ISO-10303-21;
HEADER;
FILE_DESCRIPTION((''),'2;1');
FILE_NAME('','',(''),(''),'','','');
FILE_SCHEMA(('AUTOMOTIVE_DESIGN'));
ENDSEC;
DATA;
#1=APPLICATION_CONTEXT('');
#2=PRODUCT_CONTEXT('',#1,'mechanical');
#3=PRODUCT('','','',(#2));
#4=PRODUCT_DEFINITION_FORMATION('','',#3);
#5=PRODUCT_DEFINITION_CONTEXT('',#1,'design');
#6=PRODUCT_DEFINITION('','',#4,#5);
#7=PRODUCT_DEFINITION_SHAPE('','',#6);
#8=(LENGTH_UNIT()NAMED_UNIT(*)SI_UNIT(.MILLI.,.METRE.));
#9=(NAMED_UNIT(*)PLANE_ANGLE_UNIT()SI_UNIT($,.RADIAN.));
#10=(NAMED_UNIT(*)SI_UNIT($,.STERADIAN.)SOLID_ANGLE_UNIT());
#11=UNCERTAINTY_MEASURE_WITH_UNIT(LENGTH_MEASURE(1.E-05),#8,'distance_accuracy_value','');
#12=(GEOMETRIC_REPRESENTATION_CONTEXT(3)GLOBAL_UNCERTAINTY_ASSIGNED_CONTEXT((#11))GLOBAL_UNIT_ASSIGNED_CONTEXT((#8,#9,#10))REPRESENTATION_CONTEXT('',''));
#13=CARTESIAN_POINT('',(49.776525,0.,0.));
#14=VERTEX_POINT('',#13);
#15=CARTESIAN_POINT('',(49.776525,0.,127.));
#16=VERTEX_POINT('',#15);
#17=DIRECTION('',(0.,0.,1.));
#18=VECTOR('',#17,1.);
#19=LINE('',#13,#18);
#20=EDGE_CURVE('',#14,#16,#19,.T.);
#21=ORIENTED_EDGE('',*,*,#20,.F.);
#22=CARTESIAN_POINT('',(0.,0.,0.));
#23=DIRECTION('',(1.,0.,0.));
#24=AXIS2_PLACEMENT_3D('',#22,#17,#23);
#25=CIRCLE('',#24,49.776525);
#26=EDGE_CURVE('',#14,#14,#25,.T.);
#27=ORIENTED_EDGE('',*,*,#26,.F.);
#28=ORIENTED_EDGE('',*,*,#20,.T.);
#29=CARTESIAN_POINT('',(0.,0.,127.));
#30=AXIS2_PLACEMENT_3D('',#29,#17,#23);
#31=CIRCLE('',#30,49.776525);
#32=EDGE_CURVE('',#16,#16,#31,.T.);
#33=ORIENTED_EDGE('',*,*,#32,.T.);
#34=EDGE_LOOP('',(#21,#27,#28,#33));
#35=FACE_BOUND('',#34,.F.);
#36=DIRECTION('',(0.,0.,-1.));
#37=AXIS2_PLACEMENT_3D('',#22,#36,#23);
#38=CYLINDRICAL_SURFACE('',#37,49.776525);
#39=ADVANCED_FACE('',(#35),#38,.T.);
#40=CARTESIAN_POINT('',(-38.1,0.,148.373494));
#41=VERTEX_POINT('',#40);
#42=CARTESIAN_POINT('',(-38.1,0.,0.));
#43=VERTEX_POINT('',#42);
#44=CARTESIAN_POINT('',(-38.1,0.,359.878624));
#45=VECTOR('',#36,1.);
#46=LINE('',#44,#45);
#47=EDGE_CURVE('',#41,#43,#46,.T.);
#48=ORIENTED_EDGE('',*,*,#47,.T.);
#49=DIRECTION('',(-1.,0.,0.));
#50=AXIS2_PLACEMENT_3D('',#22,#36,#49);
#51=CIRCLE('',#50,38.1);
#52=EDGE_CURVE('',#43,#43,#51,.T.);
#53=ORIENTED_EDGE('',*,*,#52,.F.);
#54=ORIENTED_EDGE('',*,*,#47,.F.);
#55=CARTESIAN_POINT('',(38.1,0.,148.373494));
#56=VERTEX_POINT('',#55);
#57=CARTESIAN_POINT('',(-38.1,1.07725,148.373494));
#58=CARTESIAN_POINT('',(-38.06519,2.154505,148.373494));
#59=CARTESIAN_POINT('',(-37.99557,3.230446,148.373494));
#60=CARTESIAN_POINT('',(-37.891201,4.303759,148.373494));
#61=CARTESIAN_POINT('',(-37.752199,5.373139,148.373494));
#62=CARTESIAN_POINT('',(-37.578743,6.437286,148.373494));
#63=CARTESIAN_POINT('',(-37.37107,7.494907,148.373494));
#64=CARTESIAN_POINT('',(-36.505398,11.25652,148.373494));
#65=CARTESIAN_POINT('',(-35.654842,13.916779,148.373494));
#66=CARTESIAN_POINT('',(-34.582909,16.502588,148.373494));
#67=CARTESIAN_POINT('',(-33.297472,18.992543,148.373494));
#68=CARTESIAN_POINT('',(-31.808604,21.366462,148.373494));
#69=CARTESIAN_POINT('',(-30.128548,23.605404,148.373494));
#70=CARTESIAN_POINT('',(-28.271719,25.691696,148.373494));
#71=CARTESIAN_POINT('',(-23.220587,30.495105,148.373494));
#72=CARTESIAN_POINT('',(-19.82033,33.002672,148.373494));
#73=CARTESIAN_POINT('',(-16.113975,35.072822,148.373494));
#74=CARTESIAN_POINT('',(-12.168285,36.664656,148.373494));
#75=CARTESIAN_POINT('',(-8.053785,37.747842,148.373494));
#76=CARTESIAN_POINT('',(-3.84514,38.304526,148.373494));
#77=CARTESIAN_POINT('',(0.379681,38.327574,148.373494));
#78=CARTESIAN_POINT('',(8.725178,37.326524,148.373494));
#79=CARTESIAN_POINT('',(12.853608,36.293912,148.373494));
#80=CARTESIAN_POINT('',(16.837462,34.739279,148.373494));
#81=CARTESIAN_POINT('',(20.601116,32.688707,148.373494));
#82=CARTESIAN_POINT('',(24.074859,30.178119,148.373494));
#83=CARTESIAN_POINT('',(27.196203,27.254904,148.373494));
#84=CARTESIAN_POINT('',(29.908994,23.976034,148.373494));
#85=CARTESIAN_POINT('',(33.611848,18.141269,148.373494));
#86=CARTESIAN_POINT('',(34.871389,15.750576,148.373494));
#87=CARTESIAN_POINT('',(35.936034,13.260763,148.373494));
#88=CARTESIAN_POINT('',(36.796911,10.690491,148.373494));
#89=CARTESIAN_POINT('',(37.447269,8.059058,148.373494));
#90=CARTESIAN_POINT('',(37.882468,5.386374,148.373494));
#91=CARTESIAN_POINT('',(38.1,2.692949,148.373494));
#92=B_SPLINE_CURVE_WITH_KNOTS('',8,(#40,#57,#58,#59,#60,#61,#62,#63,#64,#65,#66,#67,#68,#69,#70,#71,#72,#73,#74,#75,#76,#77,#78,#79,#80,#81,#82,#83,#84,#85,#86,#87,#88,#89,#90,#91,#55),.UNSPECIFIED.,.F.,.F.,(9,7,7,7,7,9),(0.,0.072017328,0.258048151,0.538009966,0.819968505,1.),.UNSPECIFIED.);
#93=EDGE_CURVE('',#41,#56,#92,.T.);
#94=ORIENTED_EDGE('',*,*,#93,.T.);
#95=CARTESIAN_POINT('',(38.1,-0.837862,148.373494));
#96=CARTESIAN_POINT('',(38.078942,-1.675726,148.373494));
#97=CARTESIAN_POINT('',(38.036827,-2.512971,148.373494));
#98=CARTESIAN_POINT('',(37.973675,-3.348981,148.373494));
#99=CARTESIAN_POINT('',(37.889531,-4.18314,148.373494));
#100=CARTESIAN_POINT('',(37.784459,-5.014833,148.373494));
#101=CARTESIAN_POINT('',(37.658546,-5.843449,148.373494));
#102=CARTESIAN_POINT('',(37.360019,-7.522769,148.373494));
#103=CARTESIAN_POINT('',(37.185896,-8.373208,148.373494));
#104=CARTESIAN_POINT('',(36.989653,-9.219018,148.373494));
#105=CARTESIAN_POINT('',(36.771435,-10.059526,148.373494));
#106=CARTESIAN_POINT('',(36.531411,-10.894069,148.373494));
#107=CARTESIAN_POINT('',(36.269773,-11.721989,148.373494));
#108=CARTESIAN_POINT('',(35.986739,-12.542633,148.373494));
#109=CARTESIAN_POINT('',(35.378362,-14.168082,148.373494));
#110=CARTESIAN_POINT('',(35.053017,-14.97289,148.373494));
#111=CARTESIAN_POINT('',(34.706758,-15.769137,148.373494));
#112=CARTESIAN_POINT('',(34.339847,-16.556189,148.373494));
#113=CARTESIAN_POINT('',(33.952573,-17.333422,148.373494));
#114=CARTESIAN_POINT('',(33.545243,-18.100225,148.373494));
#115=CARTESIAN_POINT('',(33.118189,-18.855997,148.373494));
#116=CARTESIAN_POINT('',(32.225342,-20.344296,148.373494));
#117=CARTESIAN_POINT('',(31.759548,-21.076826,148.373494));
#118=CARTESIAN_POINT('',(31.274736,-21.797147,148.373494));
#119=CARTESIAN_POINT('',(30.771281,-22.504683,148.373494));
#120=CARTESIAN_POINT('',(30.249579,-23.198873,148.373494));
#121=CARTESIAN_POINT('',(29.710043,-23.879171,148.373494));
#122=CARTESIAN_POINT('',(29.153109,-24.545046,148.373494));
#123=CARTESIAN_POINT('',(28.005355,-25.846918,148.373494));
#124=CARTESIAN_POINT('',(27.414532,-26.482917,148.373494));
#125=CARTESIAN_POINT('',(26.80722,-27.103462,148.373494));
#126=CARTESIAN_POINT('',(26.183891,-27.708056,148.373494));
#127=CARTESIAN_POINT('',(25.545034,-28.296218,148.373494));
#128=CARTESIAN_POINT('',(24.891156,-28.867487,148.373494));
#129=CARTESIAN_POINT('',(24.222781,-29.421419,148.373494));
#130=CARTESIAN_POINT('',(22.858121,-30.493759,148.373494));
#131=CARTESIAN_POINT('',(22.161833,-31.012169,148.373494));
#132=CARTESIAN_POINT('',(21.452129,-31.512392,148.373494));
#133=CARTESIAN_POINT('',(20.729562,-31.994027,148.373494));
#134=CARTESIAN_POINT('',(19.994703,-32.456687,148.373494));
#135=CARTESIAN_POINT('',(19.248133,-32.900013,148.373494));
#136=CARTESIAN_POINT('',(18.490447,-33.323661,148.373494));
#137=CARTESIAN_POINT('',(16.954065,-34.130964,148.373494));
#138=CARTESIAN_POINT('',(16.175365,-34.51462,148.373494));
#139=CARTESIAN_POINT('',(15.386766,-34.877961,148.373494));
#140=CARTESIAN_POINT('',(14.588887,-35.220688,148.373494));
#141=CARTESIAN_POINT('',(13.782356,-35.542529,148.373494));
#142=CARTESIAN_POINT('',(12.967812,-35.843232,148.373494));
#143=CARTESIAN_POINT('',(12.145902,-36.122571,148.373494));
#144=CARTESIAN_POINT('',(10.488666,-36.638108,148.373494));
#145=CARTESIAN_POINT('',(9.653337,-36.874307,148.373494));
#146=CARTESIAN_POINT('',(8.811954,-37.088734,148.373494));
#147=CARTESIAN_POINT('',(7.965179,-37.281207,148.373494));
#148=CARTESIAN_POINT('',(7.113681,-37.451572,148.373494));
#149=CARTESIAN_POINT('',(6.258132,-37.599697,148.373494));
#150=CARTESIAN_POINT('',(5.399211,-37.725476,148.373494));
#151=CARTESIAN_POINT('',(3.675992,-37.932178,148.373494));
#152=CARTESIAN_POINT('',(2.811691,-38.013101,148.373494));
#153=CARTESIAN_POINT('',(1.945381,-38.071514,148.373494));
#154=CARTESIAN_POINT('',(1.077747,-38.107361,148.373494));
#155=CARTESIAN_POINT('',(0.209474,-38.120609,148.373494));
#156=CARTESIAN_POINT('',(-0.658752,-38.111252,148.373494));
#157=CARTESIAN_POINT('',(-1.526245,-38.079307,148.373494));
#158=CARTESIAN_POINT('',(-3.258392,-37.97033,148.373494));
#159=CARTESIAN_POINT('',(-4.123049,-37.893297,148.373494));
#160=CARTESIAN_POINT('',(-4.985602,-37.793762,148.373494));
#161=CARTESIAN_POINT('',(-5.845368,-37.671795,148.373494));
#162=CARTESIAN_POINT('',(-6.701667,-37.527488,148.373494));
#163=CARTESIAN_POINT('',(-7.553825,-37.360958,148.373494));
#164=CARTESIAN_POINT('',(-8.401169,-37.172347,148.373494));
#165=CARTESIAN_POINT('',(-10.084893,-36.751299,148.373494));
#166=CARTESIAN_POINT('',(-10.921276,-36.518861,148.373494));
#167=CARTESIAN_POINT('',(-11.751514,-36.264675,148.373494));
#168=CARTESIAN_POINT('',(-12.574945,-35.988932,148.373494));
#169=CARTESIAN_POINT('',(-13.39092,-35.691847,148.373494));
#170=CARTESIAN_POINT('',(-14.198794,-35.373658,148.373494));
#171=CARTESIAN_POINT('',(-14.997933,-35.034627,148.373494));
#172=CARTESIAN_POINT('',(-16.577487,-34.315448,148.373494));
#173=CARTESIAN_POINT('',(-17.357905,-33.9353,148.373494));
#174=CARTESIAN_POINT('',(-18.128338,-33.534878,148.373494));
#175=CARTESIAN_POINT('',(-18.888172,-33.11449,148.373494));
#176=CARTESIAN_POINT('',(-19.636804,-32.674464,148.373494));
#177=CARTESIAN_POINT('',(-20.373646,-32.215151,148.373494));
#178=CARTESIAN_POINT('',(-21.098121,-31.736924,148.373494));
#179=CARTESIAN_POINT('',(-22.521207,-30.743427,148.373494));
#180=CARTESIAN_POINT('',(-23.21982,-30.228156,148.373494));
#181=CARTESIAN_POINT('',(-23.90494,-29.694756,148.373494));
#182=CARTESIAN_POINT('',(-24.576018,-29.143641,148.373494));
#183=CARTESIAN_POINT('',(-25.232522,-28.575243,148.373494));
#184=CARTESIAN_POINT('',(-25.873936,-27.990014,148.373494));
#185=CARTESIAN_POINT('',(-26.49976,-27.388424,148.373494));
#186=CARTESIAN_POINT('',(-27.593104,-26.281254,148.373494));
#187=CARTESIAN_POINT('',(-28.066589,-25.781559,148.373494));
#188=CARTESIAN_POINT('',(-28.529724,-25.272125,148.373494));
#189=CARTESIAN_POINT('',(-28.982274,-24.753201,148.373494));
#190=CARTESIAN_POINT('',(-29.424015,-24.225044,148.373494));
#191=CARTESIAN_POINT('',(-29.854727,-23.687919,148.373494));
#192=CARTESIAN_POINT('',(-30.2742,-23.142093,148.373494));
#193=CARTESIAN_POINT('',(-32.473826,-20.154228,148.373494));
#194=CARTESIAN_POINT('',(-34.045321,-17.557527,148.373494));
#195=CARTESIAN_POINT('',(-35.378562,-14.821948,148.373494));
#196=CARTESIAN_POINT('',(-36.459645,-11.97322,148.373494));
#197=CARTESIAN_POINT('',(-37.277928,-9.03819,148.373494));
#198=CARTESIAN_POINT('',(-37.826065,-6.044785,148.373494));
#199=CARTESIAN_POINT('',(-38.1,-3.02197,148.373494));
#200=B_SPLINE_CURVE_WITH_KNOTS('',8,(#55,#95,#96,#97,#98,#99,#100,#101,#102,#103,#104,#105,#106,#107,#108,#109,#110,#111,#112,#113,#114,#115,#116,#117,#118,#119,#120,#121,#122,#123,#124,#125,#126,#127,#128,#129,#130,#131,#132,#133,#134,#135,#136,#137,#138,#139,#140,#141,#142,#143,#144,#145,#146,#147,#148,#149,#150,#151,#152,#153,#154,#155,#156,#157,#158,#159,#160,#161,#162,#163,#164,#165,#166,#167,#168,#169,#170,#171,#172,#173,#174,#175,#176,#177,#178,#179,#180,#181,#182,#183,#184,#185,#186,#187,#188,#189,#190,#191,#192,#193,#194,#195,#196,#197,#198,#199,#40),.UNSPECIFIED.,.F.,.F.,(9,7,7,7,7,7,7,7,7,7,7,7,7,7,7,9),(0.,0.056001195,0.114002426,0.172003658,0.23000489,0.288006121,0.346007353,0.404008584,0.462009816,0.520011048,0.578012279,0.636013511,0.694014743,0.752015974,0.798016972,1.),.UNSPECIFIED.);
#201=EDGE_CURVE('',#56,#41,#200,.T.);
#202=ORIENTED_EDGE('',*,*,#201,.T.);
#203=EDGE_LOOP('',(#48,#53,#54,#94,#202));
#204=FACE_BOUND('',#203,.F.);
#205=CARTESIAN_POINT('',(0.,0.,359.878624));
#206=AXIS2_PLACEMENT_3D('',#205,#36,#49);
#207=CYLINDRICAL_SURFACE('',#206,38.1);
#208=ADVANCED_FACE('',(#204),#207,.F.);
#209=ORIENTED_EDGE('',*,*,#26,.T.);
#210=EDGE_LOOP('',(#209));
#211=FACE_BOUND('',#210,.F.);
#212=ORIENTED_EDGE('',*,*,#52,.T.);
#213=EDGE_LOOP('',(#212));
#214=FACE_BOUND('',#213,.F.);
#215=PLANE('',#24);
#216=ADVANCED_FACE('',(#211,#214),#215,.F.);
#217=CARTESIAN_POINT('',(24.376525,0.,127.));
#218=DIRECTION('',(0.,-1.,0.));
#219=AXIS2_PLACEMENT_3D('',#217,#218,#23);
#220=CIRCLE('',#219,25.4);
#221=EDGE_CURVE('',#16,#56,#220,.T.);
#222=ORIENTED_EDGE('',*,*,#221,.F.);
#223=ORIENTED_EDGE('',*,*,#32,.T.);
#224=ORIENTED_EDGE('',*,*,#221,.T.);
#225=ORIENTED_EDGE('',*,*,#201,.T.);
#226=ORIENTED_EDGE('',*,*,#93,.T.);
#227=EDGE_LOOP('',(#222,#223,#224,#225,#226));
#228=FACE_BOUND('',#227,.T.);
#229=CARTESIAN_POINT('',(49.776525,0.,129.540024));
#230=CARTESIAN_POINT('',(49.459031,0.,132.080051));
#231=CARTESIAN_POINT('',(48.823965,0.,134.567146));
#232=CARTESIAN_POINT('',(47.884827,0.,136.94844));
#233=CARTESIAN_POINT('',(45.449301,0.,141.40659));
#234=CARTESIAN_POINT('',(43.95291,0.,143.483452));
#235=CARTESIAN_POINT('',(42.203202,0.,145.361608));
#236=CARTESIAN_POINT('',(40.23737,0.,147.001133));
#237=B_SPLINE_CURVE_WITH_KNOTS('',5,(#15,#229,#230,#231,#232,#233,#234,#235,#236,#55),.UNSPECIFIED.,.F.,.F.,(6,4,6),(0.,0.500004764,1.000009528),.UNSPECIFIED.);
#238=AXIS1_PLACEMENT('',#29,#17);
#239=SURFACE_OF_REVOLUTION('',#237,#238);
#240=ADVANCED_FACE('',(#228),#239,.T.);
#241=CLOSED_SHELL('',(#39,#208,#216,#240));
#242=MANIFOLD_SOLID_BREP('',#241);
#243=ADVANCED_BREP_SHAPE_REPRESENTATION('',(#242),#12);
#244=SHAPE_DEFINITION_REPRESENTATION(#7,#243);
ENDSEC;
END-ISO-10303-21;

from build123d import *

# Parameters (mm, degrees)
F0_R     = 49.7765250683
F1_DEPTH = 152.4
F2_R     = 25.4
F4_D     = 76.2


# Not quite as in the source:
# - the program builds the solid bodies; features that only make, move or delete a surface that nothing else refers to are left out


with BuildPart() as f1:
    # F0 (on Top) → F1 (new body)
    with BuildSketch(Plane.XY):
        Circle(F0_R)
    extrude(amount=F1_DEPTH)

    # F2
    f2_edges = [f1.edges().sort_by_distance(p)[0] for p in [
        (-49.776525, 0, 152.4),
    ]]
    fillet(f2_edges, radius=F2_R)

    # F4 (through all)
    with Locations(Plane.XY.offset(152.4)):
        with Locations((0, 0)):
            Hole(F4_D / 2)


solid = f1.part
